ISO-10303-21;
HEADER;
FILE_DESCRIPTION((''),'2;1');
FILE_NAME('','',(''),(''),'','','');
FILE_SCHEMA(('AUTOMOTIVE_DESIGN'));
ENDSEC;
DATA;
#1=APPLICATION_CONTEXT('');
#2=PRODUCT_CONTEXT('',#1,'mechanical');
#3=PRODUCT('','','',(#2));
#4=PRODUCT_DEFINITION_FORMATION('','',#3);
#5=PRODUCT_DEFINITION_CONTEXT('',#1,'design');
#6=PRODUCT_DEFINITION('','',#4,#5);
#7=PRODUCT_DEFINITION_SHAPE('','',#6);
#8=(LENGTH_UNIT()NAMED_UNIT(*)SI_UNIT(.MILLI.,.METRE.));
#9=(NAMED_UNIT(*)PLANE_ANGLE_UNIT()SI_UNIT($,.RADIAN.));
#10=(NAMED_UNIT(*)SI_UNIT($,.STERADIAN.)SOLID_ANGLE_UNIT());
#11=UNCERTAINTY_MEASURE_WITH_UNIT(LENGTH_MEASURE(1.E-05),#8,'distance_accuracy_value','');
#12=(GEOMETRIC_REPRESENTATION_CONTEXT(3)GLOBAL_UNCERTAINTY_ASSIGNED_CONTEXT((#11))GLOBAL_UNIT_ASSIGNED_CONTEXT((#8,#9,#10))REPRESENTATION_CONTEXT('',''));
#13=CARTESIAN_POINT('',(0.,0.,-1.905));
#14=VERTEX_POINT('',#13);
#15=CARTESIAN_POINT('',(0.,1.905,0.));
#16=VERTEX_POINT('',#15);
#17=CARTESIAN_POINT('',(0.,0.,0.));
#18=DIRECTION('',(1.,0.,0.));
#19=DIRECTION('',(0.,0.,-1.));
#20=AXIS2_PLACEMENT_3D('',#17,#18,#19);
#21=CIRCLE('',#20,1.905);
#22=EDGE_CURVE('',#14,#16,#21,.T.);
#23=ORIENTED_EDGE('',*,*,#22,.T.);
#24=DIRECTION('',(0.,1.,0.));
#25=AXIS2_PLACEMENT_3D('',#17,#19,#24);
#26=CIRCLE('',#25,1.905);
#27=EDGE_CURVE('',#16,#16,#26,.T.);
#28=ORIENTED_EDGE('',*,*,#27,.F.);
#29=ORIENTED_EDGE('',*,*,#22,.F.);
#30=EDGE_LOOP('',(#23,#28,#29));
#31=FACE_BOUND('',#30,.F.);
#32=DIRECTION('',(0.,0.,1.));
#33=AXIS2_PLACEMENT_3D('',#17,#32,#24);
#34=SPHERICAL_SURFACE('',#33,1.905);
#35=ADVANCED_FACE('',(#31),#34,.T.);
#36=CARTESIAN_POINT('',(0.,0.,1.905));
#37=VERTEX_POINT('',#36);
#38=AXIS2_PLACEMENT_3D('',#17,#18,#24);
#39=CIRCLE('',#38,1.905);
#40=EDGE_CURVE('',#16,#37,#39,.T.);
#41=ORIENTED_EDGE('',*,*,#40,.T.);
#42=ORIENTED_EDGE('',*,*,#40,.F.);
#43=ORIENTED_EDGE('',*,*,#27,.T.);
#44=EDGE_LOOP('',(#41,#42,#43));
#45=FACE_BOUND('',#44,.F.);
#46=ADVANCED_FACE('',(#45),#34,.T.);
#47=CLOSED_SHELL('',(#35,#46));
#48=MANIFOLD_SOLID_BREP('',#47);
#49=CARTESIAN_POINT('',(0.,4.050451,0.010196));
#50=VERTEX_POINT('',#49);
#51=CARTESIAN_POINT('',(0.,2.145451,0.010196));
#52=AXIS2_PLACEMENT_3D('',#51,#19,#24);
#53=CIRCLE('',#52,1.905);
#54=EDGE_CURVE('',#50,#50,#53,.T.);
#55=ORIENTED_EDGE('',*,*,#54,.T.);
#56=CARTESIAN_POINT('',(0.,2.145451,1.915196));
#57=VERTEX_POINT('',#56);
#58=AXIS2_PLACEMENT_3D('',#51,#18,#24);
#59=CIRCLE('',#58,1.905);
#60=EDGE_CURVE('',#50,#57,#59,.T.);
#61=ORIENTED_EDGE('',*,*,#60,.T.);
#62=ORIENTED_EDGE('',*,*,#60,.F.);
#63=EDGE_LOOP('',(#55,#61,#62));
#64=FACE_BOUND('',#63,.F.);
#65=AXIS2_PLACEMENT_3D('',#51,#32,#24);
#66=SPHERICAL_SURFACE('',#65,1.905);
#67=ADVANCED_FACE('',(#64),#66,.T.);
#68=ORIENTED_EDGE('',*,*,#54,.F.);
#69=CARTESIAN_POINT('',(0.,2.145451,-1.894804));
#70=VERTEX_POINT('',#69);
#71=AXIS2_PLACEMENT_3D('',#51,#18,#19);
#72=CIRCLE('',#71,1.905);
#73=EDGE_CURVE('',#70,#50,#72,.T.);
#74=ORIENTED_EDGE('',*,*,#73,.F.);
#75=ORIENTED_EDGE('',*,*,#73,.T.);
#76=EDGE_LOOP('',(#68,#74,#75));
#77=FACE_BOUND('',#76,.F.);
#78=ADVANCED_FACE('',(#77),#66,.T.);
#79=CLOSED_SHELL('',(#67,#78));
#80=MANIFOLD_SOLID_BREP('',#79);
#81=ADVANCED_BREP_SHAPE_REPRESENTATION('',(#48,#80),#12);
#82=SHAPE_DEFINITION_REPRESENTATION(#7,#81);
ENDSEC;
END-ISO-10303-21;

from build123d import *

# Parameters (mm, degrees)
F4_SCALE = 0.5


with BuildPart() as f1:
    # F0 (on Right) → F1 (revolve)
    with BuildSketch(Plane.YZ):
        with BuildLine():
            ThreePointArc((3.81, 0), (2.6940768363, 2.6940768363), (0, 3.81))
            Line((0, 3.81), (0, -3.81))
            ThreePointArc((0, -3.81), (2.6940768363, -2.6940768363), (3.81, 0))
        make_face()
    revolve(axis=Axis((0, 0, -1.8932370985), (0, 0, -1)))


with BuildPart() as f3:
    # F2 (on Right) → F3 (revolve)
    with BuildSketch(Plane.YZ):
        with BuildLine():
            ThreePointArc((8.1009025215, 0.0203915406), (6.9849793578, 2.7144683769), (4.2909025215, 3.8303915406))
            Line((4.2909025215, 3.8303915406), (4.2909025215, -3.7896084594))
            ThreePointArc((4.2909025215, -3.7896084594), (6.9849793578, -2.6736852957), (8.1009025215, 0.0203915406))
        make_face()
    revolve(axis=Axis((0, 4.2909025215, 0.0203915406), (0, 0, -1)))


with BuildPart() as f3_1:
    # F4: moved
    add(f3.part.scale(F4_SCALE))


with BuildPart() as f1_1:
    # F4: moved
    add(f1.part.scale(F4_SCALE))


solid = Compound([f3_1.part, f1_1.part])
